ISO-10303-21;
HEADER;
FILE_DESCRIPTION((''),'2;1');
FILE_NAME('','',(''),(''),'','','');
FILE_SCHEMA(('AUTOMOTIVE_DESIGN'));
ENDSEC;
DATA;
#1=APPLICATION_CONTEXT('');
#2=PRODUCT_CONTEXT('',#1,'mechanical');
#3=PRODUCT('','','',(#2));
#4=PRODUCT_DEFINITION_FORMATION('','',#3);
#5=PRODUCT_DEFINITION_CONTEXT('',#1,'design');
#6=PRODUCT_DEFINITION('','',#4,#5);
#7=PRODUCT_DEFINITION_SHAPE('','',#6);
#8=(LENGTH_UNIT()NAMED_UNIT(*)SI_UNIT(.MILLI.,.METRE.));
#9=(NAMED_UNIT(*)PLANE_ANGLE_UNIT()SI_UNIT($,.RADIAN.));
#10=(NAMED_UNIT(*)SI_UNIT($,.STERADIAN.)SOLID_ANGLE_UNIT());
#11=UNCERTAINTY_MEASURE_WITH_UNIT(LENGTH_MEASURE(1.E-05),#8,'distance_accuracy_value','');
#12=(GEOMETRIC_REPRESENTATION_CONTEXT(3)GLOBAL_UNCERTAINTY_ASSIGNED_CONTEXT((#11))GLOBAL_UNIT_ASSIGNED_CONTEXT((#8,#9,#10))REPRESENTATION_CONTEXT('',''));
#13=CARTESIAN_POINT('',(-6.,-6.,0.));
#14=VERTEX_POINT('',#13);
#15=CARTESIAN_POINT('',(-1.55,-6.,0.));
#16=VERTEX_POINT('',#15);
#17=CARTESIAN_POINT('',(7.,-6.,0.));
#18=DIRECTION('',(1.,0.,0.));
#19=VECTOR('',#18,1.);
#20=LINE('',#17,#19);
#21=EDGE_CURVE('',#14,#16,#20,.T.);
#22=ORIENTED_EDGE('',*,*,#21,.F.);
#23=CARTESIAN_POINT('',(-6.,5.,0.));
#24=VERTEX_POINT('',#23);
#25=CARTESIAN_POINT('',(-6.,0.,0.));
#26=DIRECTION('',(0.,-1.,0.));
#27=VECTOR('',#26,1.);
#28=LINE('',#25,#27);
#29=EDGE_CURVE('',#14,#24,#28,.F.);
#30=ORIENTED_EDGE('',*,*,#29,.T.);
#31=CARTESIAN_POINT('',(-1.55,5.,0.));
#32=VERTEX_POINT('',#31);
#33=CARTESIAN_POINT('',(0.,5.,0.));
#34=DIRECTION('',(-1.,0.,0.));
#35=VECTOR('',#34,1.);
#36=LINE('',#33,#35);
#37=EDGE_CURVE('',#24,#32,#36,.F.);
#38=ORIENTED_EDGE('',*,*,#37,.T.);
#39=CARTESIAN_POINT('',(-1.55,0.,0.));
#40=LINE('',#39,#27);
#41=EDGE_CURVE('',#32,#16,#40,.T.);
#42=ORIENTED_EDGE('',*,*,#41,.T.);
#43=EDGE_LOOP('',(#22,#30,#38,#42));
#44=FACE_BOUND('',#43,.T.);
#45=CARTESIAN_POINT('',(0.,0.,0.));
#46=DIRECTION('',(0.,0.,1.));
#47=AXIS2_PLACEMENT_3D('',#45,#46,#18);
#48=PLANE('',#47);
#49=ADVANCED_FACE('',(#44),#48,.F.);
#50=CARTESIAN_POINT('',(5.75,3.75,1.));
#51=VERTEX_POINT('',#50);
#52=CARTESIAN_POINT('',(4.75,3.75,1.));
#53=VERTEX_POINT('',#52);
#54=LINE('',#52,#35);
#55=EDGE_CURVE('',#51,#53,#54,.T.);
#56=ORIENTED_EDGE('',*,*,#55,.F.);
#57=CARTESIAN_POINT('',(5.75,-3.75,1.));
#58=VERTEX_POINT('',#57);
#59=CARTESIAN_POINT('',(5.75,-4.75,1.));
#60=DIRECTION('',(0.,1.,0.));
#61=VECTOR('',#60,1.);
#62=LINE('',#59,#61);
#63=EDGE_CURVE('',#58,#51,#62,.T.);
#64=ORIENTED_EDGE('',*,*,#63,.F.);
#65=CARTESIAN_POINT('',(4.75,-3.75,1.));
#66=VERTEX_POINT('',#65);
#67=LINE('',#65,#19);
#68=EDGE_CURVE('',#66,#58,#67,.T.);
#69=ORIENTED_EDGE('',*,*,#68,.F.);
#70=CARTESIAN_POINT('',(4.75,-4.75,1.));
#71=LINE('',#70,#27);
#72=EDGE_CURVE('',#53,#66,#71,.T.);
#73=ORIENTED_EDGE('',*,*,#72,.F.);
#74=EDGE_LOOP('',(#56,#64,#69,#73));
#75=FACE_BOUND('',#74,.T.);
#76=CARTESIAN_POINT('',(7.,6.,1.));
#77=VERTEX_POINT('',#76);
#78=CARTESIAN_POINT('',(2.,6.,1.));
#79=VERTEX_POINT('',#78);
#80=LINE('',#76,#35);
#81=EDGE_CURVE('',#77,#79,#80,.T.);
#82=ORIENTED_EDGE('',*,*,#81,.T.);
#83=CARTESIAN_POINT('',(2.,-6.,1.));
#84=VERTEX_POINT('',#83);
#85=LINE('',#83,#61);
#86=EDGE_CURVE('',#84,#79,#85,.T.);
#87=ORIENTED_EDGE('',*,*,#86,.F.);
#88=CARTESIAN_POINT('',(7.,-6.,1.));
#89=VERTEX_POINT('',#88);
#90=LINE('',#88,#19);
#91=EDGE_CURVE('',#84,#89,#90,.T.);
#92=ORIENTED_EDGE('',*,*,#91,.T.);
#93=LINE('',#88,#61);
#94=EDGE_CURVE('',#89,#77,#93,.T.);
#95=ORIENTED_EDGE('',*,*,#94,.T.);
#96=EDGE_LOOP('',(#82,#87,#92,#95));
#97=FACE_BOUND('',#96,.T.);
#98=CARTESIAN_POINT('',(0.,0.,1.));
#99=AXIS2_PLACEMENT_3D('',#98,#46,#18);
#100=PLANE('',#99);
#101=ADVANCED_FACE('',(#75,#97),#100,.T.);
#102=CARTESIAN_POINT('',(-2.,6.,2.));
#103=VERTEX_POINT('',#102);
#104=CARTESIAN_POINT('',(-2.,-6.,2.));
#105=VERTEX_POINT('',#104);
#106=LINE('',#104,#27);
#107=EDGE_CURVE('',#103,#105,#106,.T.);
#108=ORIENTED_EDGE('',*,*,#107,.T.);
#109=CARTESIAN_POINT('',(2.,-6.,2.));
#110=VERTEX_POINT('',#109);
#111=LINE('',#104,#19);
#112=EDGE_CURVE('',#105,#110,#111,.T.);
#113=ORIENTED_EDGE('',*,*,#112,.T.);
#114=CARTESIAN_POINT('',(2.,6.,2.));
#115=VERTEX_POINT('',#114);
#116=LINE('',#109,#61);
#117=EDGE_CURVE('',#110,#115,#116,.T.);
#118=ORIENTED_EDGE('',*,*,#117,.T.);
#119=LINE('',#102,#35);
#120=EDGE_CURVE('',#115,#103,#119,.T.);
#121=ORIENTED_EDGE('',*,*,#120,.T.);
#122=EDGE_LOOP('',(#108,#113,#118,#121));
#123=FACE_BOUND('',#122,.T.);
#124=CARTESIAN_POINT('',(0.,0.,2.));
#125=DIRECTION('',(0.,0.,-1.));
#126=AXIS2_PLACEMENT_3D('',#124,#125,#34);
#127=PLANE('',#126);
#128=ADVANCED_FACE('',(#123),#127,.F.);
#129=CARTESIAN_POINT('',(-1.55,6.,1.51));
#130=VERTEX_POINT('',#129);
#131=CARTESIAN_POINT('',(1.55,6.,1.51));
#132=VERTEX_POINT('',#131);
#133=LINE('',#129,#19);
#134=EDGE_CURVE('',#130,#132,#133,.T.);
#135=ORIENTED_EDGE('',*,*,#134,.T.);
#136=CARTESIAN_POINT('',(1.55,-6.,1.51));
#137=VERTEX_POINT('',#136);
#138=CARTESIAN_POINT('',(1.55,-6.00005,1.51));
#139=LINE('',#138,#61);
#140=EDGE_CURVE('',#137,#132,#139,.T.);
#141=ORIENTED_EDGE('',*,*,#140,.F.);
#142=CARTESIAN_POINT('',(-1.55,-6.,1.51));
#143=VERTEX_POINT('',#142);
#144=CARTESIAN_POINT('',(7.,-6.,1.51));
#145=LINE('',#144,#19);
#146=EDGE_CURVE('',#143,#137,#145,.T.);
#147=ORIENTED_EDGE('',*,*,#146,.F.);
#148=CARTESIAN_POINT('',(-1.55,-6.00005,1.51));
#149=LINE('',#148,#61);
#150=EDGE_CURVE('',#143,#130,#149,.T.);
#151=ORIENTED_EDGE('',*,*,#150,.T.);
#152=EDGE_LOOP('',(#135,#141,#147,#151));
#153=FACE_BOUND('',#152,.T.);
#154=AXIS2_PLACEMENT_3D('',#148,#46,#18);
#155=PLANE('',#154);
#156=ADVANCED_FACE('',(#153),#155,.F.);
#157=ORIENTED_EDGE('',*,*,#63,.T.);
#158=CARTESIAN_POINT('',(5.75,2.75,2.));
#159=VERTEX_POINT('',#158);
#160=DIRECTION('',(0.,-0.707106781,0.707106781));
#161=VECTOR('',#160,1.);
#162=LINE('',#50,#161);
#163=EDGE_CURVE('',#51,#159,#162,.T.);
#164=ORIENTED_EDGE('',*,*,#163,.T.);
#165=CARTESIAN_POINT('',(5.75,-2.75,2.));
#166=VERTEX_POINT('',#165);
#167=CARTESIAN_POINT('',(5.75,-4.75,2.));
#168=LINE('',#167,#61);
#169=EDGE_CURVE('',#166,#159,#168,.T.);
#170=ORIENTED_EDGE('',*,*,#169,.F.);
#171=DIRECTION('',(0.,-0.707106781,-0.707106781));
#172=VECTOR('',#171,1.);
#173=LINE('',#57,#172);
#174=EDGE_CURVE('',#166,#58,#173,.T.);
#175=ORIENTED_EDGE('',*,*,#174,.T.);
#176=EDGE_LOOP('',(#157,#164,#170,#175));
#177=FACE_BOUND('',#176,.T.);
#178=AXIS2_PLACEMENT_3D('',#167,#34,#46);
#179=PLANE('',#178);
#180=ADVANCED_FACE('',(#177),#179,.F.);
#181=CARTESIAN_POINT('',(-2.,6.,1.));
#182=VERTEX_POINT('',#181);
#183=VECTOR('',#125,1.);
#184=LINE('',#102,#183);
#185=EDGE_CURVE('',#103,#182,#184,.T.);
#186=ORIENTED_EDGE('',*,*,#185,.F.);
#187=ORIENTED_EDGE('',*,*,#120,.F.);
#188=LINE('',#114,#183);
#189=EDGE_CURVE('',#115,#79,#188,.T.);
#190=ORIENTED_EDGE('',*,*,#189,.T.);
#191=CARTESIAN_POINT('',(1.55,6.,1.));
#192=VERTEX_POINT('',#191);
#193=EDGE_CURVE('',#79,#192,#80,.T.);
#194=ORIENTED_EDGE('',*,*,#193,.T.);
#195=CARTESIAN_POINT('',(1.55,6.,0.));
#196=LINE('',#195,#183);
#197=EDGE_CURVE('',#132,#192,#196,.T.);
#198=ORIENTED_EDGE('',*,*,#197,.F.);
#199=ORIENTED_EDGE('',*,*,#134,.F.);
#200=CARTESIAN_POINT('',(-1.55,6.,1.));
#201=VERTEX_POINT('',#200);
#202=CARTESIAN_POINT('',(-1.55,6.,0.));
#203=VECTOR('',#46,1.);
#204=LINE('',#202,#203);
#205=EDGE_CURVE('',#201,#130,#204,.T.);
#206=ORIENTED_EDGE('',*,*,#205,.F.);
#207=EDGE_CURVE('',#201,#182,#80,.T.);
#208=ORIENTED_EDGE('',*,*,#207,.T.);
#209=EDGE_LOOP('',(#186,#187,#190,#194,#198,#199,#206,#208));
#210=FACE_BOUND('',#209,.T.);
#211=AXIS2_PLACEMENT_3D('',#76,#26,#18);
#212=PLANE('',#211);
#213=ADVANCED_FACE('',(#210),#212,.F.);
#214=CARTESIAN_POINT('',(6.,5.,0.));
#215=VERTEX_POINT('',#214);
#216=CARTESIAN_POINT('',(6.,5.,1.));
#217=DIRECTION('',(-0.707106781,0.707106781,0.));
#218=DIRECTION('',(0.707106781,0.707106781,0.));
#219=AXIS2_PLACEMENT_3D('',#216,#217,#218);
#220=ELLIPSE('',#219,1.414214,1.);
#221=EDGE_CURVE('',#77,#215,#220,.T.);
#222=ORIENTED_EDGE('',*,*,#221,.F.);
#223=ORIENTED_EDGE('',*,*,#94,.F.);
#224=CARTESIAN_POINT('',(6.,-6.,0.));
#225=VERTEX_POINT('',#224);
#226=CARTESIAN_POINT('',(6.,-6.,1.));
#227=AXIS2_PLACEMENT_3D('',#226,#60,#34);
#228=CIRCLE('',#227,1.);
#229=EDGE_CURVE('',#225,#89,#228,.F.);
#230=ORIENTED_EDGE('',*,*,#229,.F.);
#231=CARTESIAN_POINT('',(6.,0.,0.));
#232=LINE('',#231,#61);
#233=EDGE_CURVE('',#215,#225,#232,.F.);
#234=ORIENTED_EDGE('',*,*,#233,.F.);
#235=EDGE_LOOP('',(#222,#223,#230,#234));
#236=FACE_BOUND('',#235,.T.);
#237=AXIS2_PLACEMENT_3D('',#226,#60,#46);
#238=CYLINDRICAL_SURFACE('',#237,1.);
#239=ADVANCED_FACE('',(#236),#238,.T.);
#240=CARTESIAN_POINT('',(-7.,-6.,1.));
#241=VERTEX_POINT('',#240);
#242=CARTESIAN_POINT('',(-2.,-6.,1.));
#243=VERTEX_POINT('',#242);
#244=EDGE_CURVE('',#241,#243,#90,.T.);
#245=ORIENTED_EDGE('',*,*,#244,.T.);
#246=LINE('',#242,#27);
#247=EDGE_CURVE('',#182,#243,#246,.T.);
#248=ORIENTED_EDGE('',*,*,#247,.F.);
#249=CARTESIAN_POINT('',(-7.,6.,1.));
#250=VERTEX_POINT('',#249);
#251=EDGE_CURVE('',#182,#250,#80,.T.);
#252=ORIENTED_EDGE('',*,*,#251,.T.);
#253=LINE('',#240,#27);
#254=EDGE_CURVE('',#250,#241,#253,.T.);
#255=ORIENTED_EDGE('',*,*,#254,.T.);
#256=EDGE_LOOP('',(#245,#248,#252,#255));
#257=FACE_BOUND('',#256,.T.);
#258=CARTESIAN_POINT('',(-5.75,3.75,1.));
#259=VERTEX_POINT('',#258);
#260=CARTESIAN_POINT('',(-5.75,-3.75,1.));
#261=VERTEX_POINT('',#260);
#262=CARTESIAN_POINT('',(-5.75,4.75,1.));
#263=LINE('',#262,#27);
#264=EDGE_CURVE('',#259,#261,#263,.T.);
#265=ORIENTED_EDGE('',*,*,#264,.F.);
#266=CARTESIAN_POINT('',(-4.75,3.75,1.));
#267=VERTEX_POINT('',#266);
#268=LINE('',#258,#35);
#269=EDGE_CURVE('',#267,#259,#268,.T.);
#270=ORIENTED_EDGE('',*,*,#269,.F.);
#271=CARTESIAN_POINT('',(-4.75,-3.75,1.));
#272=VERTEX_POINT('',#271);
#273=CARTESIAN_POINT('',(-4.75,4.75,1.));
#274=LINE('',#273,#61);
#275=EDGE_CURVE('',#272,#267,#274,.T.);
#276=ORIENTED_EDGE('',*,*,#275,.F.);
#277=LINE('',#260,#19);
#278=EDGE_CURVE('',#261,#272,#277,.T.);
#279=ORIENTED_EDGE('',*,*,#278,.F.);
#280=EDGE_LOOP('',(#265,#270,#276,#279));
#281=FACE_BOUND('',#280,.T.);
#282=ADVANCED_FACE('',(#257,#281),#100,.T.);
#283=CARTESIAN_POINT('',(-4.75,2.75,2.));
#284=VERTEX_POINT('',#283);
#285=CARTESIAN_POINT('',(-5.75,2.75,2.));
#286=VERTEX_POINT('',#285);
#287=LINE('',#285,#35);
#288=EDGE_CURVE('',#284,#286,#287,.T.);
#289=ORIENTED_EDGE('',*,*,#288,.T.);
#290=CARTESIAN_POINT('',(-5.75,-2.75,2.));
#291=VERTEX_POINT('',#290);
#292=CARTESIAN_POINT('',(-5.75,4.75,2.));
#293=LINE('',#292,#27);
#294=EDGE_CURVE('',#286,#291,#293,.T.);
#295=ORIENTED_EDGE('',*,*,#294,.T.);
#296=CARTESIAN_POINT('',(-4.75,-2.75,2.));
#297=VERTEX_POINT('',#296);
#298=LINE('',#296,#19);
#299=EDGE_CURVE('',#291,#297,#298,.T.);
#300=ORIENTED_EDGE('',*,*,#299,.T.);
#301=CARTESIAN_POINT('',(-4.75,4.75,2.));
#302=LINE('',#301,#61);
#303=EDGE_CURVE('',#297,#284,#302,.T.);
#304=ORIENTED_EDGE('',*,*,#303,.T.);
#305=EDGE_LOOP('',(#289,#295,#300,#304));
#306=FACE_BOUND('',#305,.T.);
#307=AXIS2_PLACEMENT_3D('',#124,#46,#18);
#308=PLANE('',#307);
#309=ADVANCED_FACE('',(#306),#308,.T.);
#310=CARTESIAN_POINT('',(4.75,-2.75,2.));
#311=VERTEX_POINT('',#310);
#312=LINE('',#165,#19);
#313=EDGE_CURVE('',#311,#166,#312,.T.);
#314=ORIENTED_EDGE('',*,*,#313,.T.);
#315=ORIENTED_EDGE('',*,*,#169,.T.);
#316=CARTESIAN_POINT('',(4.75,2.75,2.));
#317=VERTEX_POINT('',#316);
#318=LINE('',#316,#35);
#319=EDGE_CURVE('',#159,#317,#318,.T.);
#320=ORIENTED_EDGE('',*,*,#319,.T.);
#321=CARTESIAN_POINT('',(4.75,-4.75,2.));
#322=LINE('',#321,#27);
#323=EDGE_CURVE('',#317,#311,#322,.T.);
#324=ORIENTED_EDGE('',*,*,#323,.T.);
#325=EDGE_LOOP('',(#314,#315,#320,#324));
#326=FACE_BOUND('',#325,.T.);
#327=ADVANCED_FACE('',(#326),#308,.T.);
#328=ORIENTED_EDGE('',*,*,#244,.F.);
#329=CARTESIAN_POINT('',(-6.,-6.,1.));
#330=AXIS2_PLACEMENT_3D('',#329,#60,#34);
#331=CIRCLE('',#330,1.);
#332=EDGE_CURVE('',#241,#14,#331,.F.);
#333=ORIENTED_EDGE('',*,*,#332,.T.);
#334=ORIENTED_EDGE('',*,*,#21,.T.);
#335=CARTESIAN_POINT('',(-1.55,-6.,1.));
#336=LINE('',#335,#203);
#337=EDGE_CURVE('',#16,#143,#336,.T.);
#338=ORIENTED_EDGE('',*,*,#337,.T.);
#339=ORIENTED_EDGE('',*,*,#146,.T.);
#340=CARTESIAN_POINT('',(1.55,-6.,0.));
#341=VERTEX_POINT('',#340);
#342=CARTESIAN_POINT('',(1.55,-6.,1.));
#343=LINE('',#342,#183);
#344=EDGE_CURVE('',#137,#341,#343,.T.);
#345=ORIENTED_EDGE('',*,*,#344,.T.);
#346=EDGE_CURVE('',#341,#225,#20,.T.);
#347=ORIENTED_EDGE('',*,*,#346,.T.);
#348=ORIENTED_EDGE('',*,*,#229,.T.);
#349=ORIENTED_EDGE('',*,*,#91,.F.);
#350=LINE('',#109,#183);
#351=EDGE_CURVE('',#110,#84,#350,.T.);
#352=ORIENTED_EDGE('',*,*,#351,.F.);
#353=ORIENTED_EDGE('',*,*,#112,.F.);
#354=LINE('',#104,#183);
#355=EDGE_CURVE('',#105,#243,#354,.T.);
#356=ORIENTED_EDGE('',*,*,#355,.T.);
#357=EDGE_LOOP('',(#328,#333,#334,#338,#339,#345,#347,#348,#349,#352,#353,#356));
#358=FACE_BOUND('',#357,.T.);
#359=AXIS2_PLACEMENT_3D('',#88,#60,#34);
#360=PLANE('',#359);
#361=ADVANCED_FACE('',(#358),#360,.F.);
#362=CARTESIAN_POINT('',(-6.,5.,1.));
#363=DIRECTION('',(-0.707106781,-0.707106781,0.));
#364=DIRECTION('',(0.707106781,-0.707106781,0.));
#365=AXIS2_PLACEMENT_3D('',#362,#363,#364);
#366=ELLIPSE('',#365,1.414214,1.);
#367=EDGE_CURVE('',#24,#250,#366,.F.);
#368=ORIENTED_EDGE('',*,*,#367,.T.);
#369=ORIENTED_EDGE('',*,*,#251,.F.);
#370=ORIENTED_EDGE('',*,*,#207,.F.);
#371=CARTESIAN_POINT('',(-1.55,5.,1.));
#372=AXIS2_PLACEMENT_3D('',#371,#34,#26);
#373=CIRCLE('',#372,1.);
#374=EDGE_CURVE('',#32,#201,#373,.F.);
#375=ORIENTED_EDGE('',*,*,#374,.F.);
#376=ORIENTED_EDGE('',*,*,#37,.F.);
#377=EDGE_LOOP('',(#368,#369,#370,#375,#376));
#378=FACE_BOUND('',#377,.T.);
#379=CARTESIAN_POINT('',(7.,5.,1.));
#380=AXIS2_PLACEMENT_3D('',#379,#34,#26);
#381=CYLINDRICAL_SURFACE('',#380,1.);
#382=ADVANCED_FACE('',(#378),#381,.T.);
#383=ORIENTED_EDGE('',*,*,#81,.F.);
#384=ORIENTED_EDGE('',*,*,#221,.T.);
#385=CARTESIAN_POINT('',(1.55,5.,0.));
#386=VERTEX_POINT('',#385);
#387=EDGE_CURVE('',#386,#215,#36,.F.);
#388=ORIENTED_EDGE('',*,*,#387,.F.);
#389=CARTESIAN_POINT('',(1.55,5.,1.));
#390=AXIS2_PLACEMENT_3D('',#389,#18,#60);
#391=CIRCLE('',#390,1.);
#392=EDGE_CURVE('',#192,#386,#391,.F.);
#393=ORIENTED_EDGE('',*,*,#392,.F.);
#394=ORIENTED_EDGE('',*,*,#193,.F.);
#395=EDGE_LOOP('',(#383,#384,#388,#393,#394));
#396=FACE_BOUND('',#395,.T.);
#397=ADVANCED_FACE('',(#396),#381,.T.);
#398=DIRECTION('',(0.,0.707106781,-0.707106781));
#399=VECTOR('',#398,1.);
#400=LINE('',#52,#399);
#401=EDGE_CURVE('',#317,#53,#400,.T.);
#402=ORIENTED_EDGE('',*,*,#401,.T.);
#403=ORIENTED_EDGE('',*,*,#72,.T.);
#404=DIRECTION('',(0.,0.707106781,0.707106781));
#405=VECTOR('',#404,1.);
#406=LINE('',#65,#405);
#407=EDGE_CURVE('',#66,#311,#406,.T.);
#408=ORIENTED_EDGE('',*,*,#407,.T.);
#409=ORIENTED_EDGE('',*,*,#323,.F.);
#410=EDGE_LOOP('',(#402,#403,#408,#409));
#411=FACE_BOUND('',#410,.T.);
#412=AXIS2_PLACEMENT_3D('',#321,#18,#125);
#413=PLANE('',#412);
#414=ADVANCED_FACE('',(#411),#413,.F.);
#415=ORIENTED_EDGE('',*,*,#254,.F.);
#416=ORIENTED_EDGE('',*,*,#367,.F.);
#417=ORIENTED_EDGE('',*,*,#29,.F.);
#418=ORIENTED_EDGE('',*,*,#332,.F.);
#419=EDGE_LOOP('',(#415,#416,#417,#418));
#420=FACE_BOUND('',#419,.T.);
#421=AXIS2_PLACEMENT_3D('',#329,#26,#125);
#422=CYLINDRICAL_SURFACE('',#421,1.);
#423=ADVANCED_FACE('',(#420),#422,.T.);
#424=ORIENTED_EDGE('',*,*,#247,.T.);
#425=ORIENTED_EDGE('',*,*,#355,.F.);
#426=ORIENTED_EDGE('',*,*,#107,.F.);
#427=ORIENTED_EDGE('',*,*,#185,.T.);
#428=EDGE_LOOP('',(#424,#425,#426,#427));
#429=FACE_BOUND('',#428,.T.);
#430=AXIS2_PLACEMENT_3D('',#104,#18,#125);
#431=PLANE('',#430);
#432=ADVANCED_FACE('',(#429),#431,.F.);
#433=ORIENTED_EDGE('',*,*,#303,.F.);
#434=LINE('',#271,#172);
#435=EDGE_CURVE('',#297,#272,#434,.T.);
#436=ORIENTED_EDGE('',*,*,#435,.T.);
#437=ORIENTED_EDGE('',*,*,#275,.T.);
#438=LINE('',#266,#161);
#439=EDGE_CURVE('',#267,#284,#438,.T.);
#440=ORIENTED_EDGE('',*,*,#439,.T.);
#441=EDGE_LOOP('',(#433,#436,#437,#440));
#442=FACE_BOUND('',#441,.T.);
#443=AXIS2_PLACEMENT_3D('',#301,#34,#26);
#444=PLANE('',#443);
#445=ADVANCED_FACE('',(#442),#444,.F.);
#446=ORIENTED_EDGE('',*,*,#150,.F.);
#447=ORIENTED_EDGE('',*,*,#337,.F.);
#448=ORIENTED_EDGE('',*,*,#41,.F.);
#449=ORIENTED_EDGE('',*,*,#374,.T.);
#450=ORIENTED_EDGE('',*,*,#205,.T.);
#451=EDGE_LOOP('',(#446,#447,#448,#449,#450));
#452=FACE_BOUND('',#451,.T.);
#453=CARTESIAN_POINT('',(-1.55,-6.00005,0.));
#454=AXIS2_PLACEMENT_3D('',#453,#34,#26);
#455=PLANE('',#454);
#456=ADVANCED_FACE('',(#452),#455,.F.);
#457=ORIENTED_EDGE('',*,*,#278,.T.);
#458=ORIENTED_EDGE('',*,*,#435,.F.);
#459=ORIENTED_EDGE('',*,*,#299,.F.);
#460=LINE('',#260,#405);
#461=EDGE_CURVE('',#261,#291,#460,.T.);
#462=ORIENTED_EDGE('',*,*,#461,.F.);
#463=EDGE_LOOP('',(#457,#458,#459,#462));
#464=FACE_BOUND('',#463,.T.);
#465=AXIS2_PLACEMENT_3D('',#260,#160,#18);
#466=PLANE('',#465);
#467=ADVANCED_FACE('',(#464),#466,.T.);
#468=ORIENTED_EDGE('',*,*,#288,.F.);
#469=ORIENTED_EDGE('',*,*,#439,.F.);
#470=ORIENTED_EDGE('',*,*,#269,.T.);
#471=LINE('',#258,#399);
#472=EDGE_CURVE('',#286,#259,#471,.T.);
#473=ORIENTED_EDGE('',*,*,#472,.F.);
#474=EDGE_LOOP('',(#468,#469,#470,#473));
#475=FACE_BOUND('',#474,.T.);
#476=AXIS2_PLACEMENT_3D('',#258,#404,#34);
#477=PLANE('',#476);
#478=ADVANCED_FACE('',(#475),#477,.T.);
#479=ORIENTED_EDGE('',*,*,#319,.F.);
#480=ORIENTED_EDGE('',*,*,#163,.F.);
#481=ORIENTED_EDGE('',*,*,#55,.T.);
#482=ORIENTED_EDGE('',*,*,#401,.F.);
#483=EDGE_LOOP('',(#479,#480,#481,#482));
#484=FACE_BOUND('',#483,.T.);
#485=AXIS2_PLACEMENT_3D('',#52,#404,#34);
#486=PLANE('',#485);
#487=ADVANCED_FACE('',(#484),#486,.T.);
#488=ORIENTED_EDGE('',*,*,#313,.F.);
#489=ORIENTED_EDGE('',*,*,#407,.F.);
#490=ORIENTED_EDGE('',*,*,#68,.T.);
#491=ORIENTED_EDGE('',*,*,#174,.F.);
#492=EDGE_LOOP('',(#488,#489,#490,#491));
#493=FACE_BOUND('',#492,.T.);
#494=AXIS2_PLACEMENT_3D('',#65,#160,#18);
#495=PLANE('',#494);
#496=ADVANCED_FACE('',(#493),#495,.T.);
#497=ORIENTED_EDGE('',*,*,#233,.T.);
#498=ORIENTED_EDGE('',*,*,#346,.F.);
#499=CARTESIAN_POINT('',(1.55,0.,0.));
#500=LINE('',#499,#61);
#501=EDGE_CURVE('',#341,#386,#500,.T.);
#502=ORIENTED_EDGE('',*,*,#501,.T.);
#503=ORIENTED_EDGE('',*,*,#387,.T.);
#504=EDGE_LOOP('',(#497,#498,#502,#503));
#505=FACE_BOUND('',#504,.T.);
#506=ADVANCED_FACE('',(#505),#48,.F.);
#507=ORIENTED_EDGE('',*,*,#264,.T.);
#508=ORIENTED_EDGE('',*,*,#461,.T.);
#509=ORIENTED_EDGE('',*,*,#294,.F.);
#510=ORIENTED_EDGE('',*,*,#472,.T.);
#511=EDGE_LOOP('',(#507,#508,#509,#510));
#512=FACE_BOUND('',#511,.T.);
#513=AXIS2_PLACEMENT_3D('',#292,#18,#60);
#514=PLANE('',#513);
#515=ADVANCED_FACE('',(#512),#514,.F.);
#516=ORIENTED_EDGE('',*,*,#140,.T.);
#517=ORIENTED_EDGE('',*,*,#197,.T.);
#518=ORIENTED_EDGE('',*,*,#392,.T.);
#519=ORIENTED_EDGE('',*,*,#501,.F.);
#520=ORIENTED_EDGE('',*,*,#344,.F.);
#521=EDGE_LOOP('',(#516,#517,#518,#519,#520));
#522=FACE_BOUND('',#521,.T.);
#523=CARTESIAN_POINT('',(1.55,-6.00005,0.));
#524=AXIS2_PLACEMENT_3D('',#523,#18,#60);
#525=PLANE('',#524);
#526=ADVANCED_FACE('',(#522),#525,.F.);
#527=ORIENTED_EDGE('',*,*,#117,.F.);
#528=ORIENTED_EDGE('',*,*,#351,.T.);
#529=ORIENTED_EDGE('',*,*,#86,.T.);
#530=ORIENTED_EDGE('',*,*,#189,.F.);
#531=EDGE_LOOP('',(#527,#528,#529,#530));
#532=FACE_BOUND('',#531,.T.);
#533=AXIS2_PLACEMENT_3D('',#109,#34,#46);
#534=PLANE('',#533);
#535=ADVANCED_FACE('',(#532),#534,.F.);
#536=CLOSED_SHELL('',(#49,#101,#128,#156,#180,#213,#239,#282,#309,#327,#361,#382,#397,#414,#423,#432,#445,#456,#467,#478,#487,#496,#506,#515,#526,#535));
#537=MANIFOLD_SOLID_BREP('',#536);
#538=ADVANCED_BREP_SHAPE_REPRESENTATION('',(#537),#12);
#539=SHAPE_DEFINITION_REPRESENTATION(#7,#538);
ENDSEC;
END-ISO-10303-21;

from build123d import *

# Parameters (mm, degrees)
SKETCH1_W           = 14
SKETCH1_H           = 12
BOSS_EXTRUDE1_DEPTH = 1
SKETCH2_W           = 4
SKETCH2_H           = 12
BOSS_EXTRUDE2_DEPTH = 1
SKETCH3_W           = 3.1
SKETCH3_H           = 1.51
CUT_EXTRUDE1_DEPTH  = 15.035668848
SKETCH6_W           = 1
SKETCH6_H           = 9.5
BOSS_EXTRUDE5_DEPTH = 1
FILLET2_R           = 1
SKETCH7_W           = 1
SKETCH7_H           = 1
CUT_EXTRUDE2_DEPTH  = 1
CHAMFER1_SIZE       = 1


with BuildPart() as part:
    # Sketch1 → Boss-Extrude1 (new body)
    with BuildSketch(Plane.XY):
        Rectangle(SKETCH1_W, SKETCH1_H)
    extrude(amount=BOSS_EXTRUDE1_DEPTH)

    # Sketch2 → Boss-Extrude2 (add)
    with BuildSketch(Plane.XY.offset(1)):
        Rectangle(SKETCH2_W, SKETCH2_H)
    extrude(amount=BOSS_EXTRUDE2_DEPTH)

    # Sketch3 → Cut-Extrude1 (cut, through all)
    with BuildSketch(Plane(origin=(0, 6, 0), x_dir=(1, 0, 0), z_dir=(0, 1, 0))):
        with Locations((0, -0.755)):
            Rectangle(SKETCH3_W, SKETCH3_H)
    extrude(amount=-CUT_EXTRUDE1_DEPTH, mode=Mode.SUBTRACT)

    # Sketch6 → Boss-Extrude5 (add)
    with BuildSketch(Plane.XY.offset(1)):
        with Locations((5.25, 0)):
            Rectangle(SKETCH6_W, SKETCH6_H)
        with Locations((-5.25, 0)):
            Rectangle(SKETCH6_W, SKETCH6_H)
    extrude(amount=BOSS_EXTRUDE5_DEPTH)

    # Fillet2
    fillet2_edges = [part.edges().sort_by_distance(p)[0] for p in [
        (-4.275, 6, 0),
        (4.275, 6, 0),
        (7, 0, 0),
        (-7, 0, 0),
    ]]
    fillet(fillet2_edges, radius=FILLET2_R - 0.0001)  # a hair under: the kernel refuses the full size

    # Sketch7 → Cut-Extrude2 (cut)
    with BuildSketch(Plane.XY.offset(2)):
        with Locations((-5.25, -4.25)):
            Rectangle(SKETCH7_W, SKETCH7_H)
        with Locations((5.25, -4.25)):
            Rectangle(SKETCH7_W, SKETCH7_H)
        with Locations((-5.25, 4.25)):
            Rectangle(SKETCH7_W, SKETCH7_H)
        with Locations((5.25, 4.25)):
            Rectangle(SKETCH7_W, SKETCH7_H)
    extrude(amount=-CUT_EXTRUDE2_DEPTH, mode=Mode.SUBTRACT)

    # Chamfer1
    chamfer1_edges = [part.edges().sort_by_distance(p)[0] for p in [
        (5.25, -3.75, 2),
        (-5.25, -3.75, 2),
        (5.25, 3.75, 2),
        (-5.25, 3.75, 2),
    ]]
    chamfer(chamfer1_edges, length=CHAMFER1_SIZE - 0.0001)  # a hair under: the kernel refuses the full size


solid = part.part
